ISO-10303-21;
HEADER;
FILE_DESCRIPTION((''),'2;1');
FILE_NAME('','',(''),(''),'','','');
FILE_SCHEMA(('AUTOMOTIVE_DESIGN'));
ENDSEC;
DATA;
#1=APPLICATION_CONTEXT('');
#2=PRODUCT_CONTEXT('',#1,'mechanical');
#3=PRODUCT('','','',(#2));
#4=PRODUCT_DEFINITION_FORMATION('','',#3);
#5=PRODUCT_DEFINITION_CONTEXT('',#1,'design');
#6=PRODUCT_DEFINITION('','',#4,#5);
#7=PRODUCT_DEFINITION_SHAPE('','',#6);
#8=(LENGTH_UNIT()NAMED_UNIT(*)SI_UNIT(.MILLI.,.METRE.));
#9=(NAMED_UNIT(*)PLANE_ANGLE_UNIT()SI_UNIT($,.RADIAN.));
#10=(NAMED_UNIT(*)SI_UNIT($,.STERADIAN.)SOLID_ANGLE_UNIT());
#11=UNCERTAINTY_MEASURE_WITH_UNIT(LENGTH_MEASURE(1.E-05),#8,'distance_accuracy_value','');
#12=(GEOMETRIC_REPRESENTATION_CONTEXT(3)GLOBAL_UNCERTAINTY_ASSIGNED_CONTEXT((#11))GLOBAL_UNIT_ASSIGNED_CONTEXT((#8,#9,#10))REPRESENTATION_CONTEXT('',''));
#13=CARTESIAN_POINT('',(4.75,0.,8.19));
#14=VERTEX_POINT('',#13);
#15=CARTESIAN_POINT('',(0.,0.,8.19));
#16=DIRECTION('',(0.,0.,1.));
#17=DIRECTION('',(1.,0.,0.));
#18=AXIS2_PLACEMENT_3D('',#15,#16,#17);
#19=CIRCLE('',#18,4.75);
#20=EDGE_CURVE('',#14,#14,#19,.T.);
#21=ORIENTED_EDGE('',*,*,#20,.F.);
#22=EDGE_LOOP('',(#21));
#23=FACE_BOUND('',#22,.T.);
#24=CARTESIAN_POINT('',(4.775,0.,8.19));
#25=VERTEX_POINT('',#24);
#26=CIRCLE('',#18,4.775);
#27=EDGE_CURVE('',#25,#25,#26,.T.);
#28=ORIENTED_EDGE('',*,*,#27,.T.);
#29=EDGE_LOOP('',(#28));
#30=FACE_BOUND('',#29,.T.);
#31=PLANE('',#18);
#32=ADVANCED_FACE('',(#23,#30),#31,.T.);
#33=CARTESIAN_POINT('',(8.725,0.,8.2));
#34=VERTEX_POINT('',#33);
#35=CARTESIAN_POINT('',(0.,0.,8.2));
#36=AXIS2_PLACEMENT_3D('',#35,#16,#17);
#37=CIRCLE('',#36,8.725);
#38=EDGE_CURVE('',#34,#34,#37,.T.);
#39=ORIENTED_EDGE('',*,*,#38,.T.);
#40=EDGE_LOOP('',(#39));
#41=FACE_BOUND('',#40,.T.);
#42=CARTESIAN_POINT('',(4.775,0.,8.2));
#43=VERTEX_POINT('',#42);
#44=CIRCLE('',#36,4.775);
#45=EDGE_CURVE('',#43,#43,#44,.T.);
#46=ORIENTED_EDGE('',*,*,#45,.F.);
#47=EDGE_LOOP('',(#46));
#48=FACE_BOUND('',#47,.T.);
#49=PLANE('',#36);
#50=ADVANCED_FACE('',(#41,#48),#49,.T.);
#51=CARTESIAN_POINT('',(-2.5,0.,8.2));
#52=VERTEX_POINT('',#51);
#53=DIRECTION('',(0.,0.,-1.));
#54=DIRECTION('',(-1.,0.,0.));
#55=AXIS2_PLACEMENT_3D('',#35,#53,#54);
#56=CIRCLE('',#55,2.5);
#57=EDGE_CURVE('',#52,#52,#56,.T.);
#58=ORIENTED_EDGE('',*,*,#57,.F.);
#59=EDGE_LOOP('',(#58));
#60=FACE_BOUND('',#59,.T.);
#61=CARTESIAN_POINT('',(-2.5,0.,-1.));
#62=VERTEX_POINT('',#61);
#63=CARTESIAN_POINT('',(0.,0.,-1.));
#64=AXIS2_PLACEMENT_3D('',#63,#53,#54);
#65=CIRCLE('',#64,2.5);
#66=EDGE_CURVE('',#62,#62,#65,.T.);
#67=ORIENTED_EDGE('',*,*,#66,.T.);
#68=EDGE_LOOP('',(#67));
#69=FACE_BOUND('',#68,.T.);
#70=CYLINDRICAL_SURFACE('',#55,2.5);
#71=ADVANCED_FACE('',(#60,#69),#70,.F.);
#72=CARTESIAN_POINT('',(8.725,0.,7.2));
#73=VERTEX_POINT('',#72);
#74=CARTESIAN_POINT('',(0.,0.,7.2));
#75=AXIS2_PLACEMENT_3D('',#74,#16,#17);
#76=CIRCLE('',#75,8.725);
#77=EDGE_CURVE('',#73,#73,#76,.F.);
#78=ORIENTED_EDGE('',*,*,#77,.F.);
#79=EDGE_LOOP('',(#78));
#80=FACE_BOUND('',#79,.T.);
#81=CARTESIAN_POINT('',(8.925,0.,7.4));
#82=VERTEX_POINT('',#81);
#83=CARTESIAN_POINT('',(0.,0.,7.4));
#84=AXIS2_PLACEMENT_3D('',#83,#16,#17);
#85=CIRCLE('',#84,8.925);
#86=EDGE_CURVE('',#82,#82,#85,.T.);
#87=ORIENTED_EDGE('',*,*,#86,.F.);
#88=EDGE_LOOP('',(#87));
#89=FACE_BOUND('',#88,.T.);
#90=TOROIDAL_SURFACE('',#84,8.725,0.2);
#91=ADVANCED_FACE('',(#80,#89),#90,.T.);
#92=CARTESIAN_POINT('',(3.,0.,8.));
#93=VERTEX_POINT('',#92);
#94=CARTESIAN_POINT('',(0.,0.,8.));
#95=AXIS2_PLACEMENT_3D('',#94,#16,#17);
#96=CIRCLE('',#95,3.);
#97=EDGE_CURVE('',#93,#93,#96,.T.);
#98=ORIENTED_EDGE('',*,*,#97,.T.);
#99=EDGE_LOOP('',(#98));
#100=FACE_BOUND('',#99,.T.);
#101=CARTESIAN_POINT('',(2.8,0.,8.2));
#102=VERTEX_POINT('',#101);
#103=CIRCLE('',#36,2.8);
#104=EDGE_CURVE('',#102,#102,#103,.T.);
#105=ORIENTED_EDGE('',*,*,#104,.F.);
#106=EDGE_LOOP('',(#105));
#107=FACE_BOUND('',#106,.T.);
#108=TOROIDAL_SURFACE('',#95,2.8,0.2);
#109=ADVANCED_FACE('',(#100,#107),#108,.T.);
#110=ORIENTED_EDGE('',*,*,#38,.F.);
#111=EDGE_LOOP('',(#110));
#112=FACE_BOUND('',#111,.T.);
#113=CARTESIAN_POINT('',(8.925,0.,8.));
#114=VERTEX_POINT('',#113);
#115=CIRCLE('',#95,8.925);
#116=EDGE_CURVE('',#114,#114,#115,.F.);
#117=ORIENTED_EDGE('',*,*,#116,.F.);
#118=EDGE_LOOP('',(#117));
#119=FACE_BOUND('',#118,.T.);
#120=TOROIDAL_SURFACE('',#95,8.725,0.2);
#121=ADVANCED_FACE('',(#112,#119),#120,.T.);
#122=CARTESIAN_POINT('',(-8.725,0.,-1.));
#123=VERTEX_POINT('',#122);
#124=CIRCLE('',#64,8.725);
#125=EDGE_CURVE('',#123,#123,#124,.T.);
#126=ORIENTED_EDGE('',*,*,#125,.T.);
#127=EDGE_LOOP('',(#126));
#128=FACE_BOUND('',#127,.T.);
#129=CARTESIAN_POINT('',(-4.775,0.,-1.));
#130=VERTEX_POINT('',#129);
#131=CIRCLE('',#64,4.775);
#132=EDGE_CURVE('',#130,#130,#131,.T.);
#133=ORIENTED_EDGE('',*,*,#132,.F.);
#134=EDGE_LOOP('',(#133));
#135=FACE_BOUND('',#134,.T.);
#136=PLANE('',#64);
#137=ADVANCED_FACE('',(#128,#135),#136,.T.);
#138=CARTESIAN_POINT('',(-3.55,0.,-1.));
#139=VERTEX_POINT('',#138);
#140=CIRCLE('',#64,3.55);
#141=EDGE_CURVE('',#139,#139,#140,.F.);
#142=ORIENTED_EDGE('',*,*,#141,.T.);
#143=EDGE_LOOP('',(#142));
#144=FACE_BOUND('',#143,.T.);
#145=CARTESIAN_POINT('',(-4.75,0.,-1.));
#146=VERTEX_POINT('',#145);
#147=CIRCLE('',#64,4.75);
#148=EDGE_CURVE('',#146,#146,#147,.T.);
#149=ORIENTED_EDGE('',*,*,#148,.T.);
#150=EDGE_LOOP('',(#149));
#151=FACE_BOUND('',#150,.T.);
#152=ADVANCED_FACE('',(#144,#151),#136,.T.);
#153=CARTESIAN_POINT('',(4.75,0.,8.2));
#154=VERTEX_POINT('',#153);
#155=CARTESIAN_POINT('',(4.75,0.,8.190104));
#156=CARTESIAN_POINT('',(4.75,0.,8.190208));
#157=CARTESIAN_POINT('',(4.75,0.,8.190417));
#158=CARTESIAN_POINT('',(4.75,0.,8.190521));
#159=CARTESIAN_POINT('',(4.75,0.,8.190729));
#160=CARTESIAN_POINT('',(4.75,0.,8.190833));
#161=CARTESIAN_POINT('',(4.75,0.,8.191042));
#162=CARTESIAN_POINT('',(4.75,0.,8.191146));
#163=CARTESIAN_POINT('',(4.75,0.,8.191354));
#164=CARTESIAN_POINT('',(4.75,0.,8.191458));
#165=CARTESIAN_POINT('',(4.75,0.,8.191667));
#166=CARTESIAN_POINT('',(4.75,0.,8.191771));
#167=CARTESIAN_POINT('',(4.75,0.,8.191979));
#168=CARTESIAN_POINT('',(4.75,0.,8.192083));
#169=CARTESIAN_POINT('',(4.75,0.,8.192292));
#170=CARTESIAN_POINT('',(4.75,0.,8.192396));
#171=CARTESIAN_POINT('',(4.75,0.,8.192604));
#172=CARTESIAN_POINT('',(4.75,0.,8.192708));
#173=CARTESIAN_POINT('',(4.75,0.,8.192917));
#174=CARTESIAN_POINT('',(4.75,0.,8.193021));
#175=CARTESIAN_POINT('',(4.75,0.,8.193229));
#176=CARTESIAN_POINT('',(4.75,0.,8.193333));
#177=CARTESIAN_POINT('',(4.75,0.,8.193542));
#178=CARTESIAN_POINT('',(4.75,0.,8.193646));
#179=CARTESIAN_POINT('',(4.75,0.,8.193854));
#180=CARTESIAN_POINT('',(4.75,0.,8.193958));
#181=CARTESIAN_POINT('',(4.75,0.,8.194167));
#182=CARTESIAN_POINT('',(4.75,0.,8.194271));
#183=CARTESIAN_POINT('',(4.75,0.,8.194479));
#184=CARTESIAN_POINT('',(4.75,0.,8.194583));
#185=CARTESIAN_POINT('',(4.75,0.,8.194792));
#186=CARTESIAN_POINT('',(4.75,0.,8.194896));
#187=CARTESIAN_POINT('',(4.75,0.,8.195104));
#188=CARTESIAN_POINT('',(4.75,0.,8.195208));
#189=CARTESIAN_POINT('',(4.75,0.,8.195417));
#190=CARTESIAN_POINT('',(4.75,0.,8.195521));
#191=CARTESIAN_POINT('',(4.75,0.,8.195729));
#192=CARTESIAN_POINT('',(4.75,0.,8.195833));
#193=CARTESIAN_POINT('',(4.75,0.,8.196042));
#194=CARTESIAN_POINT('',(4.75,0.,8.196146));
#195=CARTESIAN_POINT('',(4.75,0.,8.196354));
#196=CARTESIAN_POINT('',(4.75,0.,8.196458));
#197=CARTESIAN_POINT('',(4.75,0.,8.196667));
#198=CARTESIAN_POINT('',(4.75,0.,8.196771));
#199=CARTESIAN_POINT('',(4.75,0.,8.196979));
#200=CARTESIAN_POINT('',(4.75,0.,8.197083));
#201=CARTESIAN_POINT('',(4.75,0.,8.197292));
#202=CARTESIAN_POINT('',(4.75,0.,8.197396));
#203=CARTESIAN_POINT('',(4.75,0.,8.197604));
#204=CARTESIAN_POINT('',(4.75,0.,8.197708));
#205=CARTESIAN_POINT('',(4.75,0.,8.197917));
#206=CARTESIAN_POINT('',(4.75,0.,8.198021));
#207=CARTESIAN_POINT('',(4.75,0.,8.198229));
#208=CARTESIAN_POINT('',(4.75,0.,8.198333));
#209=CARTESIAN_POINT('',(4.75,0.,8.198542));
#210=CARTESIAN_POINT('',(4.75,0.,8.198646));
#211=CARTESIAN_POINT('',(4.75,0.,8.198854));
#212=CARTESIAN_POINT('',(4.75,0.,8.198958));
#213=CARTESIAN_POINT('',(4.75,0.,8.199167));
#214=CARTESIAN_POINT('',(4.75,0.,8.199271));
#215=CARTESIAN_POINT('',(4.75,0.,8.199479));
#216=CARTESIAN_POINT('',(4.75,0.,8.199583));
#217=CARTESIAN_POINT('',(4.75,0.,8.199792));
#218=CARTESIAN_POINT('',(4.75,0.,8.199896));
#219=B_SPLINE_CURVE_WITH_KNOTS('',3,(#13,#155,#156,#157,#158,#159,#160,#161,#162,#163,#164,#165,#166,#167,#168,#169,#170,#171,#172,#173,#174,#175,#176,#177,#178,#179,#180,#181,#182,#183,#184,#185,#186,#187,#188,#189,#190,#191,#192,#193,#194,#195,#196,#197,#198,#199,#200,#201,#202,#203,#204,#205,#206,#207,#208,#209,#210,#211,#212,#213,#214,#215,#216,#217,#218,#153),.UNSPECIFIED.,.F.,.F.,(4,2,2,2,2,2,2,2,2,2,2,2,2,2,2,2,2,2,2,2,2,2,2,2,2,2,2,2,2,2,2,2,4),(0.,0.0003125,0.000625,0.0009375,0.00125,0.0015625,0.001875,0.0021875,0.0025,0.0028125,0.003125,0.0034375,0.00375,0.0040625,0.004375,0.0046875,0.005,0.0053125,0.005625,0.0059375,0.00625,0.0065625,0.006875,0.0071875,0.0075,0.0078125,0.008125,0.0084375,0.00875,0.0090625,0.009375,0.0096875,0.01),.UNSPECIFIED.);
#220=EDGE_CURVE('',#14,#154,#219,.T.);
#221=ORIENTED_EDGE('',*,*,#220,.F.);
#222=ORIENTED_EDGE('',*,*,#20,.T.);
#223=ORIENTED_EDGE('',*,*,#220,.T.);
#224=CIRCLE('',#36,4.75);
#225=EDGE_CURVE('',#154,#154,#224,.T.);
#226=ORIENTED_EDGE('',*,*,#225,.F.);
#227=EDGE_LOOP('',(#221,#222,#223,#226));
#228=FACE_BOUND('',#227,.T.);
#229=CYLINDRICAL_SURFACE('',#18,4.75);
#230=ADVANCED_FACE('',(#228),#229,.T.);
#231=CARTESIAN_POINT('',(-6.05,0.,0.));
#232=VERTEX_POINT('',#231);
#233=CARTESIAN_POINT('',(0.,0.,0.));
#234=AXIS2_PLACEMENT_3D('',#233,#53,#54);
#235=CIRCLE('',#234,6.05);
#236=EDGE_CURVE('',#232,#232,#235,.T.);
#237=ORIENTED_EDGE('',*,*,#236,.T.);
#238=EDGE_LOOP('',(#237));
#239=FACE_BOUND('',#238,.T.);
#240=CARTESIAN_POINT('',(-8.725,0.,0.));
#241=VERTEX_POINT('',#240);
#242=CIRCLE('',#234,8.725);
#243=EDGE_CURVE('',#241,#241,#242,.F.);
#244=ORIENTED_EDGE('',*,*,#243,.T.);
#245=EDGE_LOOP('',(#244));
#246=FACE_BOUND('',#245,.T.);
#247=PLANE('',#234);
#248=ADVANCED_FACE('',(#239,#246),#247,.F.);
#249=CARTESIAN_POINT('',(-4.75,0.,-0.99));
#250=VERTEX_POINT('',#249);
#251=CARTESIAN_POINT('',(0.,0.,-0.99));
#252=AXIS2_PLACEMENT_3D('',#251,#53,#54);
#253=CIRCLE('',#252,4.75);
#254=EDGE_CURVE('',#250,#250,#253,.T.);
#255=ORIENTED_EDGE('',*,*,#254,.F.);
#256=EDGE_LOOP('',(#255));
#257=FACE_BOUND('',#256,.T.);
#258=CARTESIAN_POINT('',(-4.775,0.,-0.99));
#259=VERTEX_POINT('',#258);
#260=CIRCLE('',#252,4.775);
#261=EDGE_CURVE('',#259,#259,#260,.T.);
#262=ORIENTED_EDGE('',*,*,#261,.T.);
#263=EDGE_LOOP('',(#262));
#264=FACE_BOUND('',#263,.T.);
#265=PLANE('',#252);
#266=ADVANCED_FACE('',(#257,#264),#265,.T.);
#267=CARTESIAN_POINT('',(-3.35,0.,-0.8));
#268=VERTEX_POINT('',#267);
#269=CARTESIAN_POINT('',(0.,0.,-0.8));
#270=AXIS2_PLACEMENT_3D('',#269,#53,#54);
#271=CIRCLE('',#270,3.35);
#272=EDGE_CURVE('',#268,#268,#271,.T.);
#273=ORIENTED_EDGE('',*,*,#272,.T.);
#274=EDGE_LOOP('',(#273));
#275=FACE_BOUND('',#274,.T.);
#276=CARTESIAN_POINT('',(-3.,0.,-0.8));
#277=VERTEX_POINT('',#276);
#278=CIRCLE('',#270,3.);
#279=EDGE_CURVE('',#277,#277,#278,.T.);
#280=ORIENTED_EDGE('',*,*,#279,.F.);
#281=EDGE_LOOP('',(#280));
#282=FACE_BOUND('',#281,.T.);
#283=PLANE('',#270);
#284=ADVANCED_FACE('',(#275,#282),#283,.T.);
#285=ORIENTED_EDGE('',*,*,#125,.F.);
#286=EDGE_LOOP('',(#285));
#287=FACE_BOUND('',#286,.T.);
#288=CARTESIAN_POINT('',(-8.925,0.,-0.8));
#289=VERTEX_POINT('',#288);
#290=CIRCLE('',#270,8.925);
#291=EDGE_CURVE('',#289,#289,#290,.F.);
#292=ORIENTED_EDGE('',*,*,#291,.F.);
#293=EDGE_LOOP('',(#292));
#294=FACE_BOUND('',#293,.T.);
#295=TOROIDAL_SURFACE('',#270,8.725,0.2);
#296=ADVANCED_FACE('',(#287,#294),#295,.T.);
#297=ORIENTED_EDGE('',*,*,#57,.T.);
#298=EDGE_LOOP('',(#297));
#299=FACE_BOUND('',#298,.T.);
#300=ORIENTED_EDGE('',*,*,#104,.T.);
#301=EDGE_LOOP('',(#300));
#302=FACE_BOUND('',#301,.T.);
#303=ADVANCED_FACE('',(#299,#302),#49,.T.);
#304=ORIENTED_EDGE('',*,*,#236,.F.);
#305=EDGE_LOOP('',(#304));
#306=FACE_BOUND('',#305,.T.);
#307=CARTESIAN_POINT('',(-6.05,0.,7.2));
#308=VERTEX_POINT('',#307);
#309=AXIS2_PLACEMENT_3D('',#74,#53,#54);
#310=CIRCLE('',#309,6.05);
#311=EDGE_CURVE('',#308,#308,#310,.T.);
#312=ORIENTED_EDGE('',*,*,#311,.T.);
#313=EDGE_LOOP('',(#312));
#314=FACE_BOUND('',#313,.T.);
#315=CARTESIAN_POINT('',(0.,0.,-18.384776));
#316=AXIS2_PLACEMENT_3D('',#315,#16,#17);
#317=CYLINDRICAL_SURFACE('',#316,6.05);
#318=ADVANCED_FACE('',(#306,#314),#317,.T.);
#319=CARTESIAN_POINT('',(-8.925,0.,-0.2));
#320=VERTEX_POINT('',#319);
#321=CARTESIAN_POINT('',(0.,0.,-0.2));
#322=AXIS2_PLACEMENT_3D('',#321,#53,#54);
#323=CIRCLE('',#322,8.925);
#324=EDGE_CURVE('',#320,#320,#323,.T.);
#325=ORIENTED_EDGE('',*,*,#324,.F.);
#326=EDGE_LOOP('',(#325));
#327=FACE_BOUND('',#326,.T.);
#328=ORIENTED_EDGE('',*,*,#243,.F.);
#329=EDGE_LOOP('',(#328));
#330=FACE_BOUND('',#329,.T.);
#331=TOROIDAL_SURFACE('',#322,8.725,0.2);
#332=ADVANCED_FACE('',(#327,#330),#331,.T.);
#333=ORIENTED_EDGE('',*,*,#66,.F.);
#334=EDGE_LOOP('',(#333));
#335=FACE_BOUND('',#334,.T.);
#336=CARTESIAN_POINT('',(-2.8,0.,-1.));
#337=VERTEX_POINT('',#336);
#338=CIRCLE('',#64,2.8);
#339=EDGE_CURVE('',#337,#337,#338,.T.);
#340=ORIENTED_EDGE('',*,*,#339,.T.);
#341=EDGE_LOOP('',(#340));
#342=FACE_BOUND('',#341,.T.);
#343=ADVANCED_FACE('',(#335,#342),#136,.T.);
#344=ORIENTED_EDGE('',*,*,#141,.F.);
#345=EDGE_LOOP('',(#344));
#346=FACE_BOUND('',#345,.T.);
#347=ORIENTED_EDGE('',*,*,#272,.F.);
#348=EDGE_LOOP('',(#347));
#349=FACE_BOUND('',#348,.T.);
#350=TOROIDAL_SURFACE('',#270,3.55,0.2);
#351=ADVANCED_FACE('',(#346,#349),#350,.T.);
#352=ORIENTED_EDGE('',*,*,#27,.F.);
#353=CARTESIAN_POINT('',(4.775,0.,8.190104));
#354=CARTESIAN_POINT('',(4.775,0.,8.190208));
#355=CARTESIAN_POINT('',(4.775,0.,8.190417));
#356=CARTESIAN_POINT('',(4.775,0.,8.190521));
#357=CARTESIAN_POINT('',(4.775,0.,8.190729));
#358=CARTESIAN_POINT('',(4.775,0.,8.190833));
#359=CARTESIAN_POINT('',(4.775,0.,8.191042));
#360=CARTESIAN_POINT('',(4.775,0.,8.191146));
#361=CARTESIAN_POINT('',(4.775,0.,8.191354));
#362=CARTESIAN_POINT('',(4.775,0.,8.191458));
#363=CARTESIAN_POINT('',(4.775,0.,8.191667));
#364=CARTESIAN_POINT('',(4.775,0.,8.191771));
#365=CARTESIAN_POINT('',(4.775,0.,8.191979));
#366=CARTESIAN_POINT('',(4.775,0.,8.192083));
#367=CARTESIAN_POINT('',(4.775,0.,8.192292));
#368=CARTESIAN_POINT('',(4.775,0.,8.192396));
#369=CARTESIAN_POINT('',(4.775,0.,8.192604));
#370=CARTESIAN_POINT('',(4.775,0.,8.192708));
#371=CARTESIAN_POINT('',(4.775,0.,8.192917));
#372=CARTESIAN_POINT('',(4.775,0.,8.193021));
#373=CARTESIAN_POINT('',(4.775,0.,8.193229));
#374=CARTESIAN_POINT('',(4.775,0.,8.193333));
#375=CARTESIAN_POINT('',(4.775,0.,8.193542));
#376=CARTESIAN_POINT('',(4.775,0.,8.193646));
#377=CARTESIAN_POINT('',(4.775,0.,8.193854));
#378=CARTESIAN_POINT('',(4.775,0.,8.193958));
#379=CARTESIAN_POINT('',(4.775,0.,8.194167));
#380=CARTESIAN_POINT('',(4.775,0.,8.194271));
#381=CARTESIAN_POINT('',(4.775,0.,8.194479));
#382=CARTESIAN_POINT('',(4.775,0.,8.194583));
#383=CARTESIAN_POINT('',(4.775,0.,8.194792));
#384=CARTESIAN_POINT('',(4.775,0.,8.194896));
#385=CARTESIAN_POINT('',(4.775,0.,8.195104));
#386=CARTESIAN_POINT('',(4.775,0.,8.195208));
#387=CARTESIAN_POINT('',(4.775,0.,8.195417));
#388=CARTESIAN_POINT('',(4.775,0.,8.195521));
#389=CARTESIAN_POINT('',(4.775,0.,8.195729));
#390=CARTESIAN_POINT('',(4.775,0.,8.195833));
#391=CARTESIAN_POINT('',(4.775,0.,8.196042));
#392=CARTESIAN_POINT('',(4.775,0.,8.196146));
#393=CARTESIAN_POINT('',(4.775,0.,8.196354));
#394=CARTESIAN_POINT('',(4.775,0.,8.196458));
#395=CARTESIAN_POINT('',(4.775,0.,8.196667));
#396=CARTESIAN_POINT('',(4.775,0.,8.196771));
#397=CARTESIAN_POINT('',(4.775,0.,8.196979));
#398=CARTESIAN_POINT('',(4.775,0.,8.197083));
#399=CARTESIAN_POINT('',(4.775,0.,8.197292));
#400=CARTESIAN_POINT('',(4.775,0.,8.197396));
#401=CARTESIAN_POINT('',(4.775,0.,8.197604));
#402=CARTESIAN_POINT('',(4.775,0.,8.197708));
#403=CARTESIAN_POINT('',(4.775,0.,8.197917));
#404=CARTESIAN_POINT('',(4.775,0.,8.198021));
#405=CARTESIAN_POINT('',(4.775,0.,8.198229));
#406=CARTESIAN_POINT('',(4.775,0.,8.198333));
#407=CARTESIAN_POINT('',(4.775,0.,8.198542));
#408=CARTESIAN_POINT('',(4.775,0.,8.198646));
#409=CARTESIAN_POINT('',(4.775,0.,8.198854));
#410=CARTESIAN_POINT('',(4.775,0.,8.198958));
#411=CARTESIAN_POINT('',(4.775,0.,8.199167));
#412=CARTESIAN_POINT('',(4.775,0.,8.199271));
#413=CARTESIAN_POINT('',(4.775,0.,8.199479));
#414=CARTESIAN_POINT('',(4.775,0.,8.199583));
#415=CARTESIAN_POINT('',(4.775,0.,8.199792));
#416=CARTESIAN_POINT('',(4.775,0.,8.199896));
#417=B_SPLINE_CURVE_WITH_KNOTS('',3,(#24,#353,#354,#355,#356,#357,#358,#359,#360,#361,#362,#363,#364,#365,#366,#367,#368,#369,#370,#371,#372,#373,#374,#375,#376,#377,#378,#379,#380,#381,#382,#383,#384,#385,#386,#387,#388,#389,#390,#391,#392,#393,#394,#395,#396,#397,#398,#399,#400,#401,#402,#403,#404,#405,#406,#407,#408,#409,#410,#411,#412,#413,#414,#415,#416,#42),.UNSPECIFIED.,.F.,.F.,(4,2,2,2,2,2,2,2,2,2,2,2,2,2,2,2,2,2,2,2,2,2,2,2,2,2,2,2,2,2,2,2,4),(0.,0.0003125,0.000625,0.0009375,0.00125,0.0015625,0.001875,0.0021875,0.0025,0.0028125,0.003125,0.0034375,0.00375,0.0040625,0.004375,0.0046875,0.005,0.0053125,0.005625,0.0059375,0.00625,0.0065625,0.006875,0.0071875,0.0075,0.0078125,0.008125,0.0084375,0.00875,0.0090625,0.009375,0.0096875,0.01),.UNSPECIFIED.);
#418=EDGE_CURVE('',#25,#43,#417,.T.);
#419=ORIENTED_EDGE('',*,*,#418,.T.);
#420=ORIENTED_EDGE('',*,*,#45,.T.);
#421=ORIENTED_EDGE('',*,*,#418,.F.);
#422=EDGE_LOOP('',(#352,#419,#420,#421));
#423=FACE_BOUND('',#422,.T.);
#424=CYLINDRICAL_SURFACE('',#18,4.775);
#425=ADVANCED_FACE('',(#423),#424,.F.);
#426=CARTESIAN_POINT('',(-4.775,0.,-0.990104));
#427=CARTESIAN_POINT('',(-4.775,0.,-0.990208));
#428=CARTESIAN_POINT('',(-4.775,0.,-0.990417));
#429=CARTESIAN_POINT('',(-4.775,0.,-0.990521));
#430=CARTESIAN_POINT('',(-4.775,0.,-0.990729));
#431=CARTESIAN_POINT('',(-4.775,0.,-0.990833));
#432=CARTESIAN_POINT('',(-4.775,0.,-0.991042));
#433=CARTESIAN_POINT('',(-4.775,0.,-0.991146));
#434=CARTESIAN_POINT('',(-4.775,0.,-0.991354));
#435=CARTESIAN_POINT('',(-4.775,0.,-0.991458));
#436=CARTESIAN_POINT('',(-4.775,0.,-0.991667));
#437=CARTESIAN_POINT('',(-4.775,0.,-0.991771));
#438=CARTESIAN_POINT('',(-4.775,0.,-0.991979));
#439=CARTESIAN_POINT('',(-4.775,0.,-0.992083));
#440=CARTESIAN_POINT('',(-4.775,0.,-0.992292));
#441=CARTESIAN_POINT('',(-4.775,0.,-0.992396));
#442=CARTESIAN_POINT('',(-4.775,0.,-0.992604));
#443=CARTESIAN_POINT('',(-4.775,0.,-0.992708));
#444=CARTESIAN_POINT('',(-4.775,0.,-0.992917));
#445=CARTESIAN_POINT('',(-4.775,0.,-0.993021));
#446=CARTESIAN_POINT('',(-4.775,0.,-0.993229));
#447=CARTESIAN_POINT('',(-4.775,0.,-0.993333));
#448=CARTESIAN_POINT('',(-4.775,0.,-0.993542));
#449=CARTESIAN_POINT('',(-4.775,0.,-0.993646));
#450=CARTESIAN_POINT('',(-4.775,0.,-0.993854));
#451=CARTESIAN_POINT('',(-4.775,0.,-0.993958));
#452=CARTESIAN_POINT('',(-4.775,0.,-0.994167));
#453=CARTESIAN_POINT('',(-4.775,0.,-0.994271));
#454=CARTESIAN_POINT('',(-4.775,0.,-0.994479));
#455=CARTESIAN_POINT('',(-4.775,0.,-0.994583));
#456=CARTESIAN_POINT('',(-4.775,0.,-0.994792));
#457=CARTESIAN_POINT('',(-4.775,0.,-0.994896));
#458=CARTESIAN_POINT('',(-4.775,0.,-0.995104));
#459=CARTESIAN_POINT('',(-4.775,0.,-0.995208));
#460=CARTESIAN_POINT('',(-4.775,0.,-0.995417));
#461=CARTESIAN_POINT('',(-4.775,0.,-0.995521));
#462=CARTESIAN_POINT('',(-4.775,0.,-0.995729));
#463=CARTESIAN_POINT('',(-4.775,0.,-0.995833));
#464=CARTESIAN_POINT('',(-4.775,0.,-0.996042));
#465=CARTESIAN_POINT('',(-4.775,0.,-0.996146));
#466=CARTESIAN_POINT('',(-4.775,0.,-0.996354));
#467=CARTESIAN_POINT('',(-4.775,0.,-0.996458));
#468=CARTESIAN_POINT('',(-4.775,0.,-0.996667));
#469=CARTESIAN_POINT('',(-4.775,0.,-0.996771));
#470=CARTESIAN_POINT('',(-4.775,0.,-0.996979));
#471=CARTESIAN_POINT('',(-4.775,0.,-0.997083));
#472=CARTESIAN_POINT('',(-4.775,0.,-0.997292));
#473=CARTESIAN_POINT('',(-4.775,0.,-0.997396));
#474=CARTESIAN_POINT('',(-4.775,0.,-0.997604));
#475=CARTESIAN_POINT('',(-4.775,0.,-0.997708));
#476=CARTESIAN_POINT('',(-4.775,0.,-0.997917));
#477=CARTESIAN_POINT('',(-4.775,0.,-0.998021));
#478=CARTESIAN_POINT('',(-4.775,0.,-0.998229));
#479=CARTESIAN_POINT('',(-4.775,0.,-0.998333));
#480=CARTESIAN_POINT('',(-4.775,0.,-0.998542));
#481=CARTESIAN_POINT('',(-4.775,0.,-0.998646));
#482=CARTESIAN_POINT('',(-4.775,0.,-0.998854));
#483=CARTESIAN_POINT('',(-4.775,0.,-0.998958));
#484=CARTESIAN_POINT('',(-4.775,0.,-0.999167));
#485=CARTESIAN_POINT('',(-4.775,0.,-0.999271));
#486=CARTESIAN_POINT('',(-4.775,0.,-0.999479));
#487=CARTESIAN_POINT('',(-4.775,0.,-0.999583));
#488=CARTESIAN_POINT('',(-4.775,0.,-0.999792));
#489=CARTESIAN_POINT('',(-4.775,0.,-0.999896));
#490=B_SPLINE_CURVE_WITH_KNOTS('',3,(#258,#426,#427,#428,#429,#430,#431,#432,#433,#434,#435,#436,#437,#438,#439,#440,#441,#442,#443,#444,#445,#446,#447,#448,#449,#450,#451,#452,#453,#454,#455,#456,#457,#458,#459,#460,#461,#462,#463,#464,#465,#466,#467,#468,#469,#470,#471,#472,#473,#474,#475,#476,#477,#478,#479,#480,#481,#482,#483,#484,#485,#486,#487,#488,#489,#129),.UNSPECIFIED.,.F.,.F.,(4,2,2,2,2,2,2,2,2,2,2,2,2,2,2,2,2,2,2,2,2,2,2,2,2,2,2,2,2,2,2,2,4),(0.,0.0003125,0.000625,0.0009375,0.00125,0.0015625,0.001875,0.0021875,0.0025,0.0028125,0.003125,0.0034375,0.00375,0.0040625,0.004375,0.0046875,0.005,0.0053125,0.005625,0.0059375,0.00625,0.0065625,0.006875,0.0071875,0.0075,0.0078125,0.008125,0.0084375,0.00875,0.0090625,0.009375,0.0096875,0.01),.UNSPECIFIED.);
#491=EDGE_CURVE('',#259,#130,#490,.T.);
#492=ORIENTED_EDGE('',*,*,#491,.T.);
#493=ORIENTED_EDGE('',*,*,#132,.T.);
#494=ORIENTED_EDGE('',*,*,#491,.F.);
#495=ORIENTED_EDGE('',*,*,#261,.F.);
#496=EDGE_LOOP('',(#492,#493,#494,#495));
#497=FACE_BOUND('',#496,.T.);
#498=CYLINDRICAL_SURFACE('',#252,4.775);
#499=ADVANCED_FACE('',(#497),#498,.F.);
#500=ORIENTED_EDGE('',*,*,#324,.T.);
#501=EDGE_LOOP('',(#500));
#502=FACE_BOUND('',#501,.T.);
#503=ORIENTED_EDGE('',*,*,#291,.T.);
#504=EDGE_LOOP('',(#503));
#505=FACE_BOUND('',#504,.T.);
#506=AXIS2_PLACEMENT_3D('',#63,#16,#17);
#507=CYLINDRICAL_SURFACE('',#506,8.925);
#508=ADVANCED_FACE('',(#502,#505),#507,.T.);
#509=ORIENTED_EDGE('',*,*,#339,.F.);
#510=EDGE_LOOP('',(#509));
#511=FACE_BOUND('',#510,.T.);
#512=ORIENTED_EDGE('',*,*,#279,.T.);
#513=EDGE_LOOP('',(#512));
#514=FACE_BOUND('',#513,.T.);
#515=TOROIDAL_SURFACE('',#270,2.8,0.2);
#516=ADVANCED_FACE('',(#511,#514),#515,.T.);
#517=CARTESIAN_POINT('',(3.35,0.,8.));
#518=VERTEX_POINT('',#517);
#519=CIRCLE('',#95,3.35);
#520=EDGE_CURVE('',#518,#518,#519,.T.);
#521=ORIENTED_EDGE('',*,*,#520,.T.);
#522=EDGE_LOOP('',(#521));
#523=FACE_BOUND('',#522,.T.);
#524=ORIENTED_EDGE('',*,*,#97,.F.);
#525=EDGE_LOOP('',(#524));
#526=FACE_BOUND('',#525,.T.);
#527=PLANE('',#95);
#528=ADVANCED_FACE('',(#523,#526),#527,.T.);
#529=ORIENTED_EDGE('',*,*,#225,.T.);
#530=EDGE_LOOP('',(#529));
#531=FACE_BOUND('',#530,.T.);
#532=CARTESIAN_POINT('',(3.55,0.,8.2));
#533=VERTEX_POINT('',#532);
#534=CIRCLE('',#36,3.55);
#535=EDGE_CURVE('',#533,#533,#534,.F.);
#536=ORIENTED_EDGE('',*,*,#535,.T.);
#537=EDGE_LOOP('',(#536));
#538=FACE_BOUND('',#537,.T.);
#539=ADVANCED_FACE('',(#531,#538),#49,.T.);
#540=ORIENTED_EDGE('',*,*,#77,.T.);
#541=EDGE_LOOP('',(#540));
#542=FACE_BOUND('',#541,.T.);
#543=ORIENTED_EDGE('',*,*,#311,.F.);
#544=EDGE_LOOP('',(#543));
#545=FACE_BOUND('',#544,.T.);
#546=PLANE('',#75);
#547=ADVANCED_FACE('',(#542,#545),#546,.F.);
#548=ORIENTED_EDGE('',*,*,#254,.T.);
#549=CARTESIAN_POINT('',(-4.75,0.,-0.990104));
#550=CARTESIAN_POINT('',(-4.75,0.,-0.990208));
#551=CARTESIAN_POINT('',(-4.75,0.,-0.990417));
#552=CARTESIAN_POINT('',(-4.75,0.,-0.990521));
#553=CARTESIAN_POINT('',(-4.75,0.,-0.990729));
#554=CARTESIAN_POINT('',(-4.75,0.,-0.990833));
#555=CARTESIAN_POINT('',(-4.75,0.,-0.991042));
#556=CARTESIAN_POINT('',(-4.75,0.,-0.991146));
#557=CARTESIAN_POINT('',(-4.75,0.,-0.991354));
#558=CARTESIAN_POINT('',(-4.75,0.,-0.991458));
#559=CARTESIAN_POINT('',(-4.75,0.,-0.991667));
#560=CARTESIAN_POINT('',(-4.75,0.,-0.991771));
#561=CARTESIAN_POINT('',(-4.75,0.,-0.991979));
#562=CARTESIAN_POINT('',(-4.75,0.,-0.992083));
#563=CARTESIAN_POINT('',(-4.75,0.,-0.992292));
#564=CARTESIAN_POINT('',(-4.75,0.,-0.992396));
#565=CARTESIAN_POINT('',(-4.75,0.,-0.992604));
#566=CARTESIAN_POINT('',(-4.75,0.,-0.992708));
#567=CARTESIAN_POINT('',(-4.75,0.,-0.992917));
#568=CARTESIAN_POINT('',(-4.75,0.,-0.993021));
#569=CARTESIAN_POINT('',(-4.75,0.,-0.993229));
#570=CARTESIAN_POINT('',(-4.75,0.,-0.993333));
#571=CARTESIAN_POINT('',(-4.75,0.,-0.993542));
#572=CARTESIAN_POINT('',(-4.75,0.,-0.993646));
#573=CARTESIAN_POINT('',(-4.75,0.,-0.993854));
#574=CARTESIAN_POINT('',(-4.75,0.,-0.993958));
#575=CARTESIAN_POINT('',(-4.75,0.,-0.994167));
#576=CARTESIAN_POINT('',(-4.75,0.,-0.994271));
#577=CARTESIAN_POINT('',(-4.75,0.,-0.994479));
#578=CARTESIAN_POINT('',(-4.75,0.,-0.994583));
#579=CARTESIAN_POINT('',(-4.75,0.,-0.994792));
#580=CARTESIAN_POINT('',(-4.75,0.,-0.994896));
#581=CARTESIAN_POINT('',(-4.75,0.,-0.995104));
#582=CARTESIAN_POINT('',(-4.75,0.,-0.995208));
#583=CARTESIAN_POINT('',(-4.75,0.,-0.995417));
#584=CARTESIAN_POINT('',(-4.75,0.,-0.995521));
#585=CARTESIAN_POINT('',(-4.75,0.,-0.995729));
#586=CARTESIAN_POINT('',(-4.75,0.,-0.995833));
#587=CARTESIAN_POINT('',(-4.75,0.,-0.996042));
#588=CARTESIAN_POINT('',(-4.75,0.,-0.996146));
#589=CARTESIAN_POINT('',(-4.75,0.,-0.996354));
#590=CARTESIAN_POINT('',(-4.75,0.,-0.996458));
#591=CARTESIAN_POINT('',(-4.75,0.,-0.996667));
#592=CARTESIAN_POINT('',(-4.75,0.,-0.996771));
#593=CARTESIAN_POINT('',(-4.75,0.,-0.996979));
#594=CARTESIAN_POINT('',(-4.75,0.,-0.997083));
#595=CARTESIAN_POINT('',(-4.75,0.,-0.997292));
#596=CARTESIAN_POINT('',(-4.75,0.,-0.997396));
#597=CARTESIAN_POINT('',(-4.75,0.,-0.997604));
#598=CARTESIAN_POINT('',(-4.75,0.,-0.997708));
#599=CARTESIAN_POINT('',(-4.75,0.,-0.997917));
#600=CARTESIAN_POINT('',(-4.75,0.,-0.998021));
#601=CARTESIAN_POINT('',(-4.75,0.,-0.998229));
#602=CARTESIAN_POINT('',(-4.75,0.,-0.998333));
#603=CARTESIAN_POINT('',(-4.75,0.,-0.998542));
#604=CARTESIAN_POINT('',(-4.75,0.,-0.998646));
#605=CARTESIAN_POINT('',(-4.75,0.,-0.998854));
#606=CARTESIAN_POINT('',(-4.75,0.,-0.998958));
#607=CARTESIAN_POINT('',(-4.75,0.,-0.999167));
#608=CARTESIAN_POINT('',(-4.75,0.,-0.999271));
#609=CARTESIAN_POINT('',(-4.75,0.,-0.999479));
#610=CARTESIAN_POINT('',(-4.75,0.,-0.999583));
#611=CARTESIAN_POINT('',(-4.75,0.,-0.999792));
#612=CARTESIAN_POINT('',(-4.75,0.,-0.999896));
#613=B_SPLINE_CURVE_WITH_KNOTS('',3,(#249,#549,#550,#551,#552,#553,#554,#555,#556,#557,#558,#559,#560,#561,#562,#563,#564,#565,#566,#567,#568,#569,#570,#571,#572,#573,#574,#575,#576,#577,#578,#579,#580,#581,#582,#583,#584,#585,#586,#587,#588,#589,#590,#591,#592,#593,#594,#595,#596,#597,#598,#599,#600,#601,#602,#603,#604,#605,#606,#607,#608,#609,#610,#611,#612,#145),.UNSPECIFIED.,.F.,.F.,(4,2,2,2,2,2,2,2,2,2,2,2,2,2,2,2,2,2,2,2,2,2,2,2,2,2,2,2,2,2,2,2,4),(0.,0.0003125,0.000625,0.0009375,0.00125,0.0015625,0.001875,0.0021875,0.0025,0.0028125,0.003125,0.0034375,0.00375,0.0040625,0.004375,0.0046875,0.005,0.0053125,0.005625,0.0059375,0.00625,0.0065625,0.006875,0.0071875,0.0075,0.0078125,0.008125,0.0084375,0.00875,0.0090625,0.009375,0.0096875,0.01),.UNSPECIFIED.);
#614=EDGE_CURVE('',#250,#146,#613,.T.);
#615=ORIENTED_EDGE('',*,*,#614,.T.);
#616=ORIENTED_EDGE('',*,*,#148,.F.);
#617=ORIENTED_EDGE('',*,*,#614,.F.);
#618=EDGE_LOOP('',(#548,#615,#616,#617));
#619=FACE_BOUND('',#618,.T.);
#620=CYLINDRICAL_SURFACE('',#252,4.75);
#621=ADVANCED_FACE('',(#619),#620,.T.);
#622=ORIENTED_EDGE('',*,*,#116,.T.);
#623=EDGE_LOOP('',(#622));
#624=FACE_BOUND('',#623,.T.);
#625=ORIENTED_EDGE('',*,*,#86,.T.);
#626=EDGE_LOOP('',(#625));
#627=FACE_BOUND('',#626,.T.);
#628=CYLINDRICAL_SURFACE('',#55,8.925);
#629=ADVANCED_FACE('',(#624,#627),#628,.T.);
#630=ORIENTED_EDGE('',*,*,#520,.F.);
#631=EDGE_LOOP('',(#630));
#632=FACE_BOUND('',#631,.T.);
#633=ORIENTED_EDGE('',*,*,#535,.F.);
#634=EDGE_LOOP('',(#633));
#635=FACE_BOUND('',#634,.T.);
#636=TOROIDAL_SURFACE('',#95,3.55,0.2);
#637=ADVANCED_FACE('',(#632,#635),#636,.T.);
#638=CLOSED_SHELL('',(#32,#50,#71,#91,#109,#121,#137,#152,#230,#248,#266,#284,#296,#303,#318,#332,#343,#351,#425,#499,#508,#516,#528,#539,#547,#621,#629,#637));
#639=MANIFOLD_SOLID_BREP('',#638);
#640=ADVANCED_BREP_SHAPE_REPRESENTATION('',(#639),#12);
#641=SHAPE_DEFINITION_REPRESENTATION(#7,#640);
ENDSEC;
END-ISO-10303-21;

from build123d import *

# Parameters (mm, degrees)
P_IDAT_VYSUNUT_M1_DEPTH     = 7.2
ZAOBLIT1_R                  = 0.2
SKICA2_R                    = 8.925
P_IDAT_VYSUNUT_M2_DEPTH     = 1
P_IDAT_START                = 1
SKICA3_R                    = 8.925
P_IDAT_VYSUNUT_M3_DEPTH     = 1
SKICA23_R                   = 2.5
ODEBRAT_VYSUNUT_M4_DEPTH    = 16.618938824
SKICA25_R                   = 4.775
SKICA25_R_2                 = 4.75
ODEBRAT_VYSUNUT_M6_DEPTH    = 0.01
ODEBRAT_START               = -0.01
SKICA27_R                   = 4.775
SKICA27_R_2                 = 4.75
ODEBRAT_VYSUNUT_M7_DEPTH    = 0.01
P_IDAT_START_2              = -9.2
SKICA28_R                   = 3.5
SKICA28_R_2                 = 2.5
P_IDAT_VYSUNUT_M4_DEPTH     = 9.2
SKICA29_R                   = 3.35
SKICA29_R_2                 = 3
ODEBRAT_VYSUNUT_M8_DEPTH    = 0.2
ODEBRAT_START_2             = -0.2
SKICA30_R                   = 3.35
SKICA30_R_2                 = 3
ODEBRAT_VYSUNUT_M9_DEPTH    = 0.2
ZAOBLIT2_R                  = 0.2
ZAOBLIT3_R                  = 0.2
DODANIE_WYCI_GNI_CIE1_REACH = 17.052
SZKIC1_R                    = 6.5
SZKIC1_R_2                  = 2.5
WYTNIJ_WYCI_GNI_CIE2_START  = 7.2
SZKIC2_R                    = 6.5
SZKIC2_R_2                  = 6.05
WYTNIJ_WYCI_GNI_CIE2_DEPTH  = 7.2


with BuildPart() as part:
    # Skica1 → Přidat vysunutím1 (new body)
    with BuildSketch(Plane.XY):
        with BuildLine():
            Line((-0.5, 6.079473661), (-0.5, 5.577633907))
            ThreePointArc((-0.5, 5.577633907), (-0.876033004, 5.531054707), (-1.248055408, 5.45915357))
            Line((-1.248055408, 5.45915357), (-1.40313242, 5.936431539))
            ThreePointArc((-1.40313242, 5.936431539), (-1.885003666, 5.801444749), (-2.354188936, 5.627414544))
            Line((-2.354188936, 5.627414544), (-2.199111924, 5.150136576))
            ThreePointArc((-2.199111924, 5.150136576), (-2.542346799, 4.989636535), (-2.873942456, 4.806293245))
            Line((-2.873942456, 4.806293245), (-3.168916463, 5.212290135))
            ThreePointArc((-3.168916463, 5.212290135), (-3.585490039, 4.935003666), (-3.977933457, 4.624504883))
            Line((-3.977933457, 4.624504883), (-3.68295945, 4.218507993))
            ThreePointArc((-3.68295945, 4.218507993), (-3.959797975, 3.959797975), (-4.218507993, 3.68295945))
            Line((-4.218507993, 3.68295945), (-4.624504883, 3.977933457))
            ThreePointArc((-4.624504883, 3.977933457), (-4.935003666, 3.585490039), (-5.212290135, 3.168916463))
            Line((-5.212290135, 3.168916463), (-4.806293245, 2.873942456))
            ThreePointArc((-4.806293245, 2.873942456), (-4.989636535, 2.542346799), (-5.150136576, 2.199111924))
            Line((-5.150136576, 2.199111924), (-5.627414544, 2.354188936))
            ThreePointArc((-5.627414544, 2.354188936), (-5.801444749, 1.885003666), (-5.936431539, 1.40313242))
            Line((-5.936431539, 1.40313242), (-5.45915357, 1.248055408))
            ThreePointArc((-5.45915357, 1.248055408), (-5.531054707, 0.876033004), (-5.577633907, 0.5))
            Line((-5.577633907, 0.5), (-6.079473661, 0.5))
            ThreePointArc((-6.079473661, 0.5), (-6.1, 0), (-6.079473661, -0.5))
            Line((-6.079473661, -0.5), (-5.577633907, -0.5))
            ThreePointArc((-5.577633907, -0.5), (-5.531054707, -0.876033004), (-5.45915357, -1.248055408))
            Line((-5.45915357, -1.248055408), (-5.936431539, -1.40313242))
            ThreePointArc((-5.936431539, -1.40313242), (-5.801444749, -1.885003666), (-5.627414544, -2.354188936))
            Line((-5.627414544, -2.354188936), (-5.150136576, -2.199111924))
            ThreePointArc((-5.150136576, -2.199111924), (-4.989636535, -2.542346799), (-4.806293245, -2.873942456))
            Line((-4.806293245, -2.873942456), (-5.212290135, -3.168916463))
            ThreePointArc((-5.212290135, -3.168916463), (-4.935003666, -3.585490039), (-4.624504883, -3.977933457))
            Line((-4.624504883, -3.977933457), (-4.218507993, -3.68295945))
            ThreePointArc((-4.218507993, -3.68295945), (-3.959797975, -3.959797975), (-3.68295945, -4.218507993))
            Line((-3.68295945, -4.218507993), (-3.977933457, -4.624504883))
            ThreePointArc((-3.977933457, -4.624504883), (-3.585490039, -4.935003666), (-3.168916463, -5.212290135))
            Line((-3.168916463, -5.212290135), (-2.873942456, -4.806293245))
            ThreePointArc((-2.873942456, -4.806293245), (-2.542346799, -4.989636535), (-2.199111924, -5.150136576))
            Line((-2.199111924, -5.150136576), (-2.354188936, -5.627414544))
            ThreePointArc((-2.354188936, -5.627414544), (-1.885003666, -5.801444749), (-1.40313242, -5.936431539))
            Line((-1.40313242, -5.936431539), (-1.248055408, -5.45915357))
            ThreePointArc((-1.248055408, -5.45915357), (-0.876033004, -5.531054707), (-0.5, -5.577633907))
            Line((-0.5, -5.577633907), (-0.5, -6.079473661))
            ThreePointArc((-0.5, -6.079473661), (0, -6.1), (0.5, -6.079473661))
            Line((0.5, -6.079473661), (0.5, -5.577633907))
            ThreePointArc((0.5, -5.577633907), (0.876033004, -5.531054707), (1.248055408, -5.45915357))
            Line((1.248055408, -5.45915357), (1.40313242, -5.936431539))
            ThreePointArc((1.40313242, -5.936431539), (1.885003666, -5.801444749), (2.354188936, -5.627414544))
            Line((2.354188936, -5.627414544), (2.199111924, -5.150136576))
            ThreePointArc((2.199111924, -5.150136576), (2.542346799, -4.989636535), (2.873942456, -4.806293245))
            Line((2.873942456, -4.806293245), (3.168916463, -5.212290135))
            ThreePointArc((3.168916463, -5.212290135), (3.585490039, -4.935003666), (3.977933457, -4.624504883))
            Line((3.977933457, -4.624504883), (3.68295945, -4.218507993))
            ThreePointArc((3.68295945, -4.218507993), (3.959797975, -3.959797975), (4.218507993, -3.68295945))
            Line((4.218507993, -3.68295945), (4.624504883, -3.977933457))
            ThreePointArc((4.624504883, -3.977933457), (4.935003666, -3.585490039), (5.212290135, -3.168916463))
            Line((5.212290135, -3.168916463), (4.806293245, -2.873942456))
            ThreePointArc((4.806293245, -2.873942456), (4.989636535, -2.542346799), (5.150136576, -2.199111924))
            Line((5.150136576, -2.199111924), (5.627414544, -2.354188936))
            ThreePointArc((5.627414544, -2.354188936), (5.801444749, -1.885003666), (5.936431539, -1.40313242))
            Line((5.936431539, -1.40313242), (5.45915357, -1.248055408))
            ThreePointArc((5.45915357, -1.248055408), (5.531054707, -0.876033004), (5.577633907, -0.5))
            Line((5.577633907, -0.5), (6.079473661, -0.5))
            ThreePointArc((6.079473661, -0.5), (6.1, 0), (6.079473661, 0.5))
            Line((6.079473661, 0.5), (5.577633907, 0.5))
            ThreePointArc((5.577633907, 0.5), (5.531054707, 0.876033004), (5.45915357, 1.248055408))
            Line((5.45915357, 1.248055408), (5.936431539, 1.40313242))
            ThreePointArc((5.936431539, 1.40313242), (5.801444749, 1.885003666), (5.627414544, 2.354188936))
            Line((5.627414544, 2.354188936), (5.150136576, 2.199111924))
            ThreePointArc((5.150136576, 2.199111924), (4.989636535, 2.542346799), (4.806293245, 2.873942456))
            Line((4.806293245, 2.873942456), (5.212290135, 3.168916463))
            ThreePointArc((5.212290135, 3.168916463), (4.935003666, 3.585490039), (4.624504883, 3.977933457))
            Line((4.624504883, 3.977933457), (4.218507993, 3.68295945))
            ThreePointArc((4.218507993, 3.68295945), (3.959797975, 3.959797975), (3.68295945, 4.218507993))
            Line((3.68295945, 4.218507993), (3.977933457, 4.624504883))
            ThreePointArc((3.977933457, 4.624504883), (3.585490039, 4.935003666), (3.168916463, 5.212290135))
            Line((3.168916463, 5.212290135), (2.873942456, 4.806293245))
            ThreePointArc((2.873942456, 4.806293245), (2.542346799, 4.989636535), (2.199111924, 5.150136576))
            Line((2.199111924, 5.150136576), (2.354188936, 5.627414544))
            ThreePointArc((2.354188936, 5.627414544), (1.885003666, 5.801444749), (1.40313242, 5.936431539))
            Line((1.40313242, 5.936431539), (1.248055408, 5.45915357))
            ThreePointArc((1.248055408, 5.45915357), (0.876033004, 5.531054707), (0.5, 5.577633907))
            Line((0.5, 5.577633907), (0.5, 6.079473661))
            ThreePointArc((0.5, 6.079473661), (0, 6.1), (-0.5, 6.079473661))
        make_face()
    extrude(amount=P_IDAT_VYSUNUT_M1_DEPTH)

    # Zaoblit1
    zaoblit1_edges = [part.edges().sort_by_distance(p)[0] for p in [
        (0.5, 6.079473661, 3.6),
        (0.5, 5.577633907, 3.6),
        (1.248055408, 5.45915357, 3.6),
        (1.40313242, 5.936431539, 3.6),
        (2.354188936, 5.627414544, 3.6),
        (2.199111924, 5.150136576, 3.6),
        (2.873942456, 4.806293245, 3.6),
        (3.168916463, 5.212290135, 3.6),
        (3.977933457, 4.624504883, 3.6),
        (3.68295945, 4.218507993, 3.6),
        (4.218507993, 3.68295945, 3.6),
        (4.624504883, 3.977933457, 3.6),
        (5.212290135, 3.168916463, 3.6),
        (4.806293245, 2.873942456, 3.6),
        (5.150136576, 2.199111924, 3.6),
        (5.627414544, 2.354188936, 3.6),
        (5.936431539, 1.40313242, 3.6),
        (5.45915357, 1.248055408, 3.6),
        (5.577633907, 0.5, 3.6),
        (6.079473661, 0.5, 3.6),
        (6.079473661, -0.5, 3.6),
        (5.577633907, -0.5, 3.6),
        (5.45915357, -1.248055408, 3.6),
        (5.936431539, -1.40313242, 3.6),
        (5.627414544, -2.354188936, 3.6),
        (5.150136576, -2.199111924, 3.6),
        (4.806293245, -2.873942456, 3.6),
        (5.212290135, -3.168916463, 3.6),
        (4.624504883, -3.977933457, 3.6),
        (4.218507993, -3.68295945, 3.6),
        (3.68295945, -4.218507993, 3.6),
        (3.977933457, -4.624504883, 3.6),
        (3.168916463, -5.212290135, 3.6),
        (2.873942456, -4.806293245, 3.6),
        (2.199111924, -5.150136576, 3.6),
        (2.354188936, -5.627414544, 3.6),
        (1.40313242, -5.936431539, 3.6),
        (1.248055408, -5.45915357, 3.6),
        (0.5, -5.577633907, 3.6),
        (0.5, -6.079473661, 3.6),
        (-0.5, -6.079473661, 3.6),
        (-0.5, -5.577633907, 3.6),
        (-1.248055408, -5.45915357, 3.6),
        (-1.40313242, -5.936431539, 3.6),
        (-2.354188936, -5.627414544, 3.6),
        (-2.199111924, -5.150136576, 3.6),
        (-2.873942456, -4.806293245, 3.6),
        (-3.168916463, -5.212290135, 3.6),
        (-3.977933457, -4.624504883, 3.6),
        (-3.68295945, -4.218507993, 3.6),
        (-4.218507993, -3.68295945, 3.6),
        (-4.624504883, -3.977933457, 3.6),
        (-5.212290135, -3.168916463, 3.6),
        (-4.806293245, -2.873942456, 3.6),
        (-5.150136576, -2.199111924, 3.6),
        (-5.627414544, -2.354188936, 3.6),
        (-5.936431539, -1.40313242, 3.6),
        (-5.45915357, -1.248055408, 3.6),
        (-5.577633907, -0.5, 3.6),
        (-6.079473661, -0.5, 3.6),
        (-6.079473661, 0.5, 3.6),
        (-5.577633907, 0.5, 3.6),
        (-5.45915357, 1.248055408, 3.6),
        (-5.936431539, 1.40313242, 3.6),
        (-5.627414544, 2.354188936, 3.6),
        (-5.150136576, 2.199111924, 3.6),
        (-4.806293245, 2.873942456, 3.6),
        (-5.212290135, 3.168916463, 3.6),
        (-4.624504883, 3.977933457, 3.6),
        (-4.218507993, 3.68295945, 3.6),
        (-3.68295945, 4.218507993, 3.6),
        (-3.977933457, 4.624504883, 3.6),
        (-3.168916463, 5.212290135, 3.6),
        (-2.873942456, 4.806293245, 3.6),
        (-2.199111924, 5.150136576, 3.6),
        (-2.354188936, 5.627414544, 3.6),
        (-1.40313242, 5.936431539, 3.6),
        (-1.248055408, 5.45915357, 3.6),
        (-0.5, 5.577633907, 3.6),
        (-0.5, 6.079473661, 3.6),
    ]]
    fillet(zaoblit1_edges, radius=ZAOBLIT1_R)

    # Skica2 → Přidat vysunutím2 (add)
    with BuildSketch(Plane.XY.offset(7.2)):
        Circle(SKICA2_R)
    extrude(amount=P_IDAT_VYSUNUT_M2_DEPTH)

    # Skica3 → Přidat vysunutím3 (add)
    with BuildSketch(Plane(origin=(0, 0, 0), x_dir=(-1, 0, 0), z_dir=(0, 0, -1)).offset(P_IDAT_START)):
        with Locations(Location((0, 0, 0), (0, 0, 180))):
            Circle(SKICA3_R)
    extrude(amount=-P_IDAT_VYSUNUT_M3_DEPTH)

    # Skica23 → Odebrat vysunutím4 (cut, through all)
    with BuildSketch(Plane(origin=(0, 0, -1), x_dir=(-1, 0, 0), z_dir=(0, 0, -1))):
        Circle(SKICA23_R)
    extrude(amount=-ODEBRAT_VYSUNUT_M4_DEPTH, mode=Mode.SUBTRACT)

    # Skica25 → Odebrat vysunutím6 (cut)
    with BuildSketch(Plane.XY.offset(8.2)):
        Circle(SKICA25_R)
        Circle(SKICA25_R_2, mode=Mode.SUBTRACT)
    extrude(amount=-ODEBRAT_VYSUNUT_M6_DEPTH, mode=Mode.SUBTRACT)

    # Skica27 → Odebrat vysunutím7 (cut)
    with BuildSketch(Plane(origin=(0, 0, -1), x_dir=(-1, 0, 0), z_dir=(0, 0, -1)).offset(ODEBRAT_START)):
        with Locations(Location((0, 0, 0), (0, 0, 180))):
            Circle(SKICA27_R)
        with Locations(Location((0, 0, 0), (0, 0, 180))):
            Circle(SKICA27_R_2, mode=Mode.SUBTRACT)
    extrude(amount=ODEBRAT_VYSUNUT_M7_DEPTH, mode=Mode.SUBTRACT)

    # Skica28 → Přidat vysunutím4 (add)
    with BuildSketch(Plane.XY.offset(8.2).offset(P_IDAT_START_2)):
        Circle(SKICA28_R)
        with Locations(Location((0, 0, 0), (0, 0, 180))):
            Circle(SKICA28_R_2, mode=Mode.SUBTRACT)
    extrude(amount=P_IDAT_VYSUNUT_M4_DEPTH)

    # Skica29 → Odebrat vysunutím8 (cut)
    with BuildSketch(Plane.XY.offset(8.2)):
        Circle(SKICA29_R)
        Circle(SKICA29_R_2, mode=Mode.SUBTRACT)
    extrude(amount=-ODEBRAT_VYSUNUT_M8_DEPTH, mode=Mode.SUBTRACT)

    # Skica30 → Odebrat vysunutím9 (cut)
    with BuildSketch(Plane(origin=(0, 0, -1), x_dir=(-1, 0, 0), z_dir=(0, 0, -1)).offset(ODEBRAT_START_2)):
        with Locations(Location((0, 0, 0), (0, 0, 180))):
            Circle(SKICA30_R)
        with Locations(Location((0, 0, 0), (0, 0, 180))):
            Circle(SKICA30_R_2, mode=Mode.SUBTRACT)
    extrude(amount=ODEBRAT_VYSUNUT_M9_DEPTH, mode=Mode.SUBTRACT)

    # Zaoblit2
    zaoblit2_edges = [part.edges().sort_by_distance(p)[0] for p in [
        (-3.35, 0, 8.2),
        (-3, 0, 8.2),
        (-3.35, 0, -1),
        (-3, 0, -1),
    ]]
    fillet(zaoblit2_edges, radius=ZAOBLIT2_R - 0.0001)  # a hair under: the kernel refuses the full size

    # Zaoblit3
    zaoblit3_edges = [part.edges().sort_by_distance(p)[0] for p in [
        (-8.925, 0, 7.2),
        (-8.925, 0, 8.2),
        (-8.925, 0, 0),
        (-8.925, 0, -1),
    ]]
    fillet(zaoblit3_edges, radius=ZAOBLIT3_R)

    # Szkic1 → Dodanie-wyciągnięcie1 (add, up to next)
    with BuildSketch(Plane.XY, mode=Mode.PRIVATE) as dodanie_wyci_gni_cie1_sk1:
        with Locations(Location((0, 0, 0), (0, 0, 180))):
            Circle(SZKIC1_R)
        with Locations(Location((0, 0, 0), (0, 0, 180))):
            Circle(SZKIC1_R_2, mode=Mode.SUBTRACT)
    dodanie_wyci_gni_cie1_tool1 = extrude(dodanie_wyci_gni_cie1_sk1.sketch, amount=DODANIE_WYCI_GNI_CIE1_REACH, mode=Mode.PRIVATE) - part.part
    add(dodanie_wyci_gni_cie1_tool1.solids().sort_by_distance((6.316152, 0, 0))[0])

    # Szkic2 → Wytnij-wyciągnięcie2 (cut)
    with BuildSketch(Plane(origin=(0, 0, 7.2), x_dir=(-1, 0, 0), z_dir=(0, 0, -1)).offset(WYTNIJ_WYCI_GNI_CIE2_START)):
        Circle(SZKIC2_R)
        Circle(SZKIC2_R_2, mode=Mode.SUBTRACT)
    extrude(amount=-WYTNIJ_WYCI_GNI_CIE2_DEPTH, mode=Mode.SUBTRACT)


solid = part.part
